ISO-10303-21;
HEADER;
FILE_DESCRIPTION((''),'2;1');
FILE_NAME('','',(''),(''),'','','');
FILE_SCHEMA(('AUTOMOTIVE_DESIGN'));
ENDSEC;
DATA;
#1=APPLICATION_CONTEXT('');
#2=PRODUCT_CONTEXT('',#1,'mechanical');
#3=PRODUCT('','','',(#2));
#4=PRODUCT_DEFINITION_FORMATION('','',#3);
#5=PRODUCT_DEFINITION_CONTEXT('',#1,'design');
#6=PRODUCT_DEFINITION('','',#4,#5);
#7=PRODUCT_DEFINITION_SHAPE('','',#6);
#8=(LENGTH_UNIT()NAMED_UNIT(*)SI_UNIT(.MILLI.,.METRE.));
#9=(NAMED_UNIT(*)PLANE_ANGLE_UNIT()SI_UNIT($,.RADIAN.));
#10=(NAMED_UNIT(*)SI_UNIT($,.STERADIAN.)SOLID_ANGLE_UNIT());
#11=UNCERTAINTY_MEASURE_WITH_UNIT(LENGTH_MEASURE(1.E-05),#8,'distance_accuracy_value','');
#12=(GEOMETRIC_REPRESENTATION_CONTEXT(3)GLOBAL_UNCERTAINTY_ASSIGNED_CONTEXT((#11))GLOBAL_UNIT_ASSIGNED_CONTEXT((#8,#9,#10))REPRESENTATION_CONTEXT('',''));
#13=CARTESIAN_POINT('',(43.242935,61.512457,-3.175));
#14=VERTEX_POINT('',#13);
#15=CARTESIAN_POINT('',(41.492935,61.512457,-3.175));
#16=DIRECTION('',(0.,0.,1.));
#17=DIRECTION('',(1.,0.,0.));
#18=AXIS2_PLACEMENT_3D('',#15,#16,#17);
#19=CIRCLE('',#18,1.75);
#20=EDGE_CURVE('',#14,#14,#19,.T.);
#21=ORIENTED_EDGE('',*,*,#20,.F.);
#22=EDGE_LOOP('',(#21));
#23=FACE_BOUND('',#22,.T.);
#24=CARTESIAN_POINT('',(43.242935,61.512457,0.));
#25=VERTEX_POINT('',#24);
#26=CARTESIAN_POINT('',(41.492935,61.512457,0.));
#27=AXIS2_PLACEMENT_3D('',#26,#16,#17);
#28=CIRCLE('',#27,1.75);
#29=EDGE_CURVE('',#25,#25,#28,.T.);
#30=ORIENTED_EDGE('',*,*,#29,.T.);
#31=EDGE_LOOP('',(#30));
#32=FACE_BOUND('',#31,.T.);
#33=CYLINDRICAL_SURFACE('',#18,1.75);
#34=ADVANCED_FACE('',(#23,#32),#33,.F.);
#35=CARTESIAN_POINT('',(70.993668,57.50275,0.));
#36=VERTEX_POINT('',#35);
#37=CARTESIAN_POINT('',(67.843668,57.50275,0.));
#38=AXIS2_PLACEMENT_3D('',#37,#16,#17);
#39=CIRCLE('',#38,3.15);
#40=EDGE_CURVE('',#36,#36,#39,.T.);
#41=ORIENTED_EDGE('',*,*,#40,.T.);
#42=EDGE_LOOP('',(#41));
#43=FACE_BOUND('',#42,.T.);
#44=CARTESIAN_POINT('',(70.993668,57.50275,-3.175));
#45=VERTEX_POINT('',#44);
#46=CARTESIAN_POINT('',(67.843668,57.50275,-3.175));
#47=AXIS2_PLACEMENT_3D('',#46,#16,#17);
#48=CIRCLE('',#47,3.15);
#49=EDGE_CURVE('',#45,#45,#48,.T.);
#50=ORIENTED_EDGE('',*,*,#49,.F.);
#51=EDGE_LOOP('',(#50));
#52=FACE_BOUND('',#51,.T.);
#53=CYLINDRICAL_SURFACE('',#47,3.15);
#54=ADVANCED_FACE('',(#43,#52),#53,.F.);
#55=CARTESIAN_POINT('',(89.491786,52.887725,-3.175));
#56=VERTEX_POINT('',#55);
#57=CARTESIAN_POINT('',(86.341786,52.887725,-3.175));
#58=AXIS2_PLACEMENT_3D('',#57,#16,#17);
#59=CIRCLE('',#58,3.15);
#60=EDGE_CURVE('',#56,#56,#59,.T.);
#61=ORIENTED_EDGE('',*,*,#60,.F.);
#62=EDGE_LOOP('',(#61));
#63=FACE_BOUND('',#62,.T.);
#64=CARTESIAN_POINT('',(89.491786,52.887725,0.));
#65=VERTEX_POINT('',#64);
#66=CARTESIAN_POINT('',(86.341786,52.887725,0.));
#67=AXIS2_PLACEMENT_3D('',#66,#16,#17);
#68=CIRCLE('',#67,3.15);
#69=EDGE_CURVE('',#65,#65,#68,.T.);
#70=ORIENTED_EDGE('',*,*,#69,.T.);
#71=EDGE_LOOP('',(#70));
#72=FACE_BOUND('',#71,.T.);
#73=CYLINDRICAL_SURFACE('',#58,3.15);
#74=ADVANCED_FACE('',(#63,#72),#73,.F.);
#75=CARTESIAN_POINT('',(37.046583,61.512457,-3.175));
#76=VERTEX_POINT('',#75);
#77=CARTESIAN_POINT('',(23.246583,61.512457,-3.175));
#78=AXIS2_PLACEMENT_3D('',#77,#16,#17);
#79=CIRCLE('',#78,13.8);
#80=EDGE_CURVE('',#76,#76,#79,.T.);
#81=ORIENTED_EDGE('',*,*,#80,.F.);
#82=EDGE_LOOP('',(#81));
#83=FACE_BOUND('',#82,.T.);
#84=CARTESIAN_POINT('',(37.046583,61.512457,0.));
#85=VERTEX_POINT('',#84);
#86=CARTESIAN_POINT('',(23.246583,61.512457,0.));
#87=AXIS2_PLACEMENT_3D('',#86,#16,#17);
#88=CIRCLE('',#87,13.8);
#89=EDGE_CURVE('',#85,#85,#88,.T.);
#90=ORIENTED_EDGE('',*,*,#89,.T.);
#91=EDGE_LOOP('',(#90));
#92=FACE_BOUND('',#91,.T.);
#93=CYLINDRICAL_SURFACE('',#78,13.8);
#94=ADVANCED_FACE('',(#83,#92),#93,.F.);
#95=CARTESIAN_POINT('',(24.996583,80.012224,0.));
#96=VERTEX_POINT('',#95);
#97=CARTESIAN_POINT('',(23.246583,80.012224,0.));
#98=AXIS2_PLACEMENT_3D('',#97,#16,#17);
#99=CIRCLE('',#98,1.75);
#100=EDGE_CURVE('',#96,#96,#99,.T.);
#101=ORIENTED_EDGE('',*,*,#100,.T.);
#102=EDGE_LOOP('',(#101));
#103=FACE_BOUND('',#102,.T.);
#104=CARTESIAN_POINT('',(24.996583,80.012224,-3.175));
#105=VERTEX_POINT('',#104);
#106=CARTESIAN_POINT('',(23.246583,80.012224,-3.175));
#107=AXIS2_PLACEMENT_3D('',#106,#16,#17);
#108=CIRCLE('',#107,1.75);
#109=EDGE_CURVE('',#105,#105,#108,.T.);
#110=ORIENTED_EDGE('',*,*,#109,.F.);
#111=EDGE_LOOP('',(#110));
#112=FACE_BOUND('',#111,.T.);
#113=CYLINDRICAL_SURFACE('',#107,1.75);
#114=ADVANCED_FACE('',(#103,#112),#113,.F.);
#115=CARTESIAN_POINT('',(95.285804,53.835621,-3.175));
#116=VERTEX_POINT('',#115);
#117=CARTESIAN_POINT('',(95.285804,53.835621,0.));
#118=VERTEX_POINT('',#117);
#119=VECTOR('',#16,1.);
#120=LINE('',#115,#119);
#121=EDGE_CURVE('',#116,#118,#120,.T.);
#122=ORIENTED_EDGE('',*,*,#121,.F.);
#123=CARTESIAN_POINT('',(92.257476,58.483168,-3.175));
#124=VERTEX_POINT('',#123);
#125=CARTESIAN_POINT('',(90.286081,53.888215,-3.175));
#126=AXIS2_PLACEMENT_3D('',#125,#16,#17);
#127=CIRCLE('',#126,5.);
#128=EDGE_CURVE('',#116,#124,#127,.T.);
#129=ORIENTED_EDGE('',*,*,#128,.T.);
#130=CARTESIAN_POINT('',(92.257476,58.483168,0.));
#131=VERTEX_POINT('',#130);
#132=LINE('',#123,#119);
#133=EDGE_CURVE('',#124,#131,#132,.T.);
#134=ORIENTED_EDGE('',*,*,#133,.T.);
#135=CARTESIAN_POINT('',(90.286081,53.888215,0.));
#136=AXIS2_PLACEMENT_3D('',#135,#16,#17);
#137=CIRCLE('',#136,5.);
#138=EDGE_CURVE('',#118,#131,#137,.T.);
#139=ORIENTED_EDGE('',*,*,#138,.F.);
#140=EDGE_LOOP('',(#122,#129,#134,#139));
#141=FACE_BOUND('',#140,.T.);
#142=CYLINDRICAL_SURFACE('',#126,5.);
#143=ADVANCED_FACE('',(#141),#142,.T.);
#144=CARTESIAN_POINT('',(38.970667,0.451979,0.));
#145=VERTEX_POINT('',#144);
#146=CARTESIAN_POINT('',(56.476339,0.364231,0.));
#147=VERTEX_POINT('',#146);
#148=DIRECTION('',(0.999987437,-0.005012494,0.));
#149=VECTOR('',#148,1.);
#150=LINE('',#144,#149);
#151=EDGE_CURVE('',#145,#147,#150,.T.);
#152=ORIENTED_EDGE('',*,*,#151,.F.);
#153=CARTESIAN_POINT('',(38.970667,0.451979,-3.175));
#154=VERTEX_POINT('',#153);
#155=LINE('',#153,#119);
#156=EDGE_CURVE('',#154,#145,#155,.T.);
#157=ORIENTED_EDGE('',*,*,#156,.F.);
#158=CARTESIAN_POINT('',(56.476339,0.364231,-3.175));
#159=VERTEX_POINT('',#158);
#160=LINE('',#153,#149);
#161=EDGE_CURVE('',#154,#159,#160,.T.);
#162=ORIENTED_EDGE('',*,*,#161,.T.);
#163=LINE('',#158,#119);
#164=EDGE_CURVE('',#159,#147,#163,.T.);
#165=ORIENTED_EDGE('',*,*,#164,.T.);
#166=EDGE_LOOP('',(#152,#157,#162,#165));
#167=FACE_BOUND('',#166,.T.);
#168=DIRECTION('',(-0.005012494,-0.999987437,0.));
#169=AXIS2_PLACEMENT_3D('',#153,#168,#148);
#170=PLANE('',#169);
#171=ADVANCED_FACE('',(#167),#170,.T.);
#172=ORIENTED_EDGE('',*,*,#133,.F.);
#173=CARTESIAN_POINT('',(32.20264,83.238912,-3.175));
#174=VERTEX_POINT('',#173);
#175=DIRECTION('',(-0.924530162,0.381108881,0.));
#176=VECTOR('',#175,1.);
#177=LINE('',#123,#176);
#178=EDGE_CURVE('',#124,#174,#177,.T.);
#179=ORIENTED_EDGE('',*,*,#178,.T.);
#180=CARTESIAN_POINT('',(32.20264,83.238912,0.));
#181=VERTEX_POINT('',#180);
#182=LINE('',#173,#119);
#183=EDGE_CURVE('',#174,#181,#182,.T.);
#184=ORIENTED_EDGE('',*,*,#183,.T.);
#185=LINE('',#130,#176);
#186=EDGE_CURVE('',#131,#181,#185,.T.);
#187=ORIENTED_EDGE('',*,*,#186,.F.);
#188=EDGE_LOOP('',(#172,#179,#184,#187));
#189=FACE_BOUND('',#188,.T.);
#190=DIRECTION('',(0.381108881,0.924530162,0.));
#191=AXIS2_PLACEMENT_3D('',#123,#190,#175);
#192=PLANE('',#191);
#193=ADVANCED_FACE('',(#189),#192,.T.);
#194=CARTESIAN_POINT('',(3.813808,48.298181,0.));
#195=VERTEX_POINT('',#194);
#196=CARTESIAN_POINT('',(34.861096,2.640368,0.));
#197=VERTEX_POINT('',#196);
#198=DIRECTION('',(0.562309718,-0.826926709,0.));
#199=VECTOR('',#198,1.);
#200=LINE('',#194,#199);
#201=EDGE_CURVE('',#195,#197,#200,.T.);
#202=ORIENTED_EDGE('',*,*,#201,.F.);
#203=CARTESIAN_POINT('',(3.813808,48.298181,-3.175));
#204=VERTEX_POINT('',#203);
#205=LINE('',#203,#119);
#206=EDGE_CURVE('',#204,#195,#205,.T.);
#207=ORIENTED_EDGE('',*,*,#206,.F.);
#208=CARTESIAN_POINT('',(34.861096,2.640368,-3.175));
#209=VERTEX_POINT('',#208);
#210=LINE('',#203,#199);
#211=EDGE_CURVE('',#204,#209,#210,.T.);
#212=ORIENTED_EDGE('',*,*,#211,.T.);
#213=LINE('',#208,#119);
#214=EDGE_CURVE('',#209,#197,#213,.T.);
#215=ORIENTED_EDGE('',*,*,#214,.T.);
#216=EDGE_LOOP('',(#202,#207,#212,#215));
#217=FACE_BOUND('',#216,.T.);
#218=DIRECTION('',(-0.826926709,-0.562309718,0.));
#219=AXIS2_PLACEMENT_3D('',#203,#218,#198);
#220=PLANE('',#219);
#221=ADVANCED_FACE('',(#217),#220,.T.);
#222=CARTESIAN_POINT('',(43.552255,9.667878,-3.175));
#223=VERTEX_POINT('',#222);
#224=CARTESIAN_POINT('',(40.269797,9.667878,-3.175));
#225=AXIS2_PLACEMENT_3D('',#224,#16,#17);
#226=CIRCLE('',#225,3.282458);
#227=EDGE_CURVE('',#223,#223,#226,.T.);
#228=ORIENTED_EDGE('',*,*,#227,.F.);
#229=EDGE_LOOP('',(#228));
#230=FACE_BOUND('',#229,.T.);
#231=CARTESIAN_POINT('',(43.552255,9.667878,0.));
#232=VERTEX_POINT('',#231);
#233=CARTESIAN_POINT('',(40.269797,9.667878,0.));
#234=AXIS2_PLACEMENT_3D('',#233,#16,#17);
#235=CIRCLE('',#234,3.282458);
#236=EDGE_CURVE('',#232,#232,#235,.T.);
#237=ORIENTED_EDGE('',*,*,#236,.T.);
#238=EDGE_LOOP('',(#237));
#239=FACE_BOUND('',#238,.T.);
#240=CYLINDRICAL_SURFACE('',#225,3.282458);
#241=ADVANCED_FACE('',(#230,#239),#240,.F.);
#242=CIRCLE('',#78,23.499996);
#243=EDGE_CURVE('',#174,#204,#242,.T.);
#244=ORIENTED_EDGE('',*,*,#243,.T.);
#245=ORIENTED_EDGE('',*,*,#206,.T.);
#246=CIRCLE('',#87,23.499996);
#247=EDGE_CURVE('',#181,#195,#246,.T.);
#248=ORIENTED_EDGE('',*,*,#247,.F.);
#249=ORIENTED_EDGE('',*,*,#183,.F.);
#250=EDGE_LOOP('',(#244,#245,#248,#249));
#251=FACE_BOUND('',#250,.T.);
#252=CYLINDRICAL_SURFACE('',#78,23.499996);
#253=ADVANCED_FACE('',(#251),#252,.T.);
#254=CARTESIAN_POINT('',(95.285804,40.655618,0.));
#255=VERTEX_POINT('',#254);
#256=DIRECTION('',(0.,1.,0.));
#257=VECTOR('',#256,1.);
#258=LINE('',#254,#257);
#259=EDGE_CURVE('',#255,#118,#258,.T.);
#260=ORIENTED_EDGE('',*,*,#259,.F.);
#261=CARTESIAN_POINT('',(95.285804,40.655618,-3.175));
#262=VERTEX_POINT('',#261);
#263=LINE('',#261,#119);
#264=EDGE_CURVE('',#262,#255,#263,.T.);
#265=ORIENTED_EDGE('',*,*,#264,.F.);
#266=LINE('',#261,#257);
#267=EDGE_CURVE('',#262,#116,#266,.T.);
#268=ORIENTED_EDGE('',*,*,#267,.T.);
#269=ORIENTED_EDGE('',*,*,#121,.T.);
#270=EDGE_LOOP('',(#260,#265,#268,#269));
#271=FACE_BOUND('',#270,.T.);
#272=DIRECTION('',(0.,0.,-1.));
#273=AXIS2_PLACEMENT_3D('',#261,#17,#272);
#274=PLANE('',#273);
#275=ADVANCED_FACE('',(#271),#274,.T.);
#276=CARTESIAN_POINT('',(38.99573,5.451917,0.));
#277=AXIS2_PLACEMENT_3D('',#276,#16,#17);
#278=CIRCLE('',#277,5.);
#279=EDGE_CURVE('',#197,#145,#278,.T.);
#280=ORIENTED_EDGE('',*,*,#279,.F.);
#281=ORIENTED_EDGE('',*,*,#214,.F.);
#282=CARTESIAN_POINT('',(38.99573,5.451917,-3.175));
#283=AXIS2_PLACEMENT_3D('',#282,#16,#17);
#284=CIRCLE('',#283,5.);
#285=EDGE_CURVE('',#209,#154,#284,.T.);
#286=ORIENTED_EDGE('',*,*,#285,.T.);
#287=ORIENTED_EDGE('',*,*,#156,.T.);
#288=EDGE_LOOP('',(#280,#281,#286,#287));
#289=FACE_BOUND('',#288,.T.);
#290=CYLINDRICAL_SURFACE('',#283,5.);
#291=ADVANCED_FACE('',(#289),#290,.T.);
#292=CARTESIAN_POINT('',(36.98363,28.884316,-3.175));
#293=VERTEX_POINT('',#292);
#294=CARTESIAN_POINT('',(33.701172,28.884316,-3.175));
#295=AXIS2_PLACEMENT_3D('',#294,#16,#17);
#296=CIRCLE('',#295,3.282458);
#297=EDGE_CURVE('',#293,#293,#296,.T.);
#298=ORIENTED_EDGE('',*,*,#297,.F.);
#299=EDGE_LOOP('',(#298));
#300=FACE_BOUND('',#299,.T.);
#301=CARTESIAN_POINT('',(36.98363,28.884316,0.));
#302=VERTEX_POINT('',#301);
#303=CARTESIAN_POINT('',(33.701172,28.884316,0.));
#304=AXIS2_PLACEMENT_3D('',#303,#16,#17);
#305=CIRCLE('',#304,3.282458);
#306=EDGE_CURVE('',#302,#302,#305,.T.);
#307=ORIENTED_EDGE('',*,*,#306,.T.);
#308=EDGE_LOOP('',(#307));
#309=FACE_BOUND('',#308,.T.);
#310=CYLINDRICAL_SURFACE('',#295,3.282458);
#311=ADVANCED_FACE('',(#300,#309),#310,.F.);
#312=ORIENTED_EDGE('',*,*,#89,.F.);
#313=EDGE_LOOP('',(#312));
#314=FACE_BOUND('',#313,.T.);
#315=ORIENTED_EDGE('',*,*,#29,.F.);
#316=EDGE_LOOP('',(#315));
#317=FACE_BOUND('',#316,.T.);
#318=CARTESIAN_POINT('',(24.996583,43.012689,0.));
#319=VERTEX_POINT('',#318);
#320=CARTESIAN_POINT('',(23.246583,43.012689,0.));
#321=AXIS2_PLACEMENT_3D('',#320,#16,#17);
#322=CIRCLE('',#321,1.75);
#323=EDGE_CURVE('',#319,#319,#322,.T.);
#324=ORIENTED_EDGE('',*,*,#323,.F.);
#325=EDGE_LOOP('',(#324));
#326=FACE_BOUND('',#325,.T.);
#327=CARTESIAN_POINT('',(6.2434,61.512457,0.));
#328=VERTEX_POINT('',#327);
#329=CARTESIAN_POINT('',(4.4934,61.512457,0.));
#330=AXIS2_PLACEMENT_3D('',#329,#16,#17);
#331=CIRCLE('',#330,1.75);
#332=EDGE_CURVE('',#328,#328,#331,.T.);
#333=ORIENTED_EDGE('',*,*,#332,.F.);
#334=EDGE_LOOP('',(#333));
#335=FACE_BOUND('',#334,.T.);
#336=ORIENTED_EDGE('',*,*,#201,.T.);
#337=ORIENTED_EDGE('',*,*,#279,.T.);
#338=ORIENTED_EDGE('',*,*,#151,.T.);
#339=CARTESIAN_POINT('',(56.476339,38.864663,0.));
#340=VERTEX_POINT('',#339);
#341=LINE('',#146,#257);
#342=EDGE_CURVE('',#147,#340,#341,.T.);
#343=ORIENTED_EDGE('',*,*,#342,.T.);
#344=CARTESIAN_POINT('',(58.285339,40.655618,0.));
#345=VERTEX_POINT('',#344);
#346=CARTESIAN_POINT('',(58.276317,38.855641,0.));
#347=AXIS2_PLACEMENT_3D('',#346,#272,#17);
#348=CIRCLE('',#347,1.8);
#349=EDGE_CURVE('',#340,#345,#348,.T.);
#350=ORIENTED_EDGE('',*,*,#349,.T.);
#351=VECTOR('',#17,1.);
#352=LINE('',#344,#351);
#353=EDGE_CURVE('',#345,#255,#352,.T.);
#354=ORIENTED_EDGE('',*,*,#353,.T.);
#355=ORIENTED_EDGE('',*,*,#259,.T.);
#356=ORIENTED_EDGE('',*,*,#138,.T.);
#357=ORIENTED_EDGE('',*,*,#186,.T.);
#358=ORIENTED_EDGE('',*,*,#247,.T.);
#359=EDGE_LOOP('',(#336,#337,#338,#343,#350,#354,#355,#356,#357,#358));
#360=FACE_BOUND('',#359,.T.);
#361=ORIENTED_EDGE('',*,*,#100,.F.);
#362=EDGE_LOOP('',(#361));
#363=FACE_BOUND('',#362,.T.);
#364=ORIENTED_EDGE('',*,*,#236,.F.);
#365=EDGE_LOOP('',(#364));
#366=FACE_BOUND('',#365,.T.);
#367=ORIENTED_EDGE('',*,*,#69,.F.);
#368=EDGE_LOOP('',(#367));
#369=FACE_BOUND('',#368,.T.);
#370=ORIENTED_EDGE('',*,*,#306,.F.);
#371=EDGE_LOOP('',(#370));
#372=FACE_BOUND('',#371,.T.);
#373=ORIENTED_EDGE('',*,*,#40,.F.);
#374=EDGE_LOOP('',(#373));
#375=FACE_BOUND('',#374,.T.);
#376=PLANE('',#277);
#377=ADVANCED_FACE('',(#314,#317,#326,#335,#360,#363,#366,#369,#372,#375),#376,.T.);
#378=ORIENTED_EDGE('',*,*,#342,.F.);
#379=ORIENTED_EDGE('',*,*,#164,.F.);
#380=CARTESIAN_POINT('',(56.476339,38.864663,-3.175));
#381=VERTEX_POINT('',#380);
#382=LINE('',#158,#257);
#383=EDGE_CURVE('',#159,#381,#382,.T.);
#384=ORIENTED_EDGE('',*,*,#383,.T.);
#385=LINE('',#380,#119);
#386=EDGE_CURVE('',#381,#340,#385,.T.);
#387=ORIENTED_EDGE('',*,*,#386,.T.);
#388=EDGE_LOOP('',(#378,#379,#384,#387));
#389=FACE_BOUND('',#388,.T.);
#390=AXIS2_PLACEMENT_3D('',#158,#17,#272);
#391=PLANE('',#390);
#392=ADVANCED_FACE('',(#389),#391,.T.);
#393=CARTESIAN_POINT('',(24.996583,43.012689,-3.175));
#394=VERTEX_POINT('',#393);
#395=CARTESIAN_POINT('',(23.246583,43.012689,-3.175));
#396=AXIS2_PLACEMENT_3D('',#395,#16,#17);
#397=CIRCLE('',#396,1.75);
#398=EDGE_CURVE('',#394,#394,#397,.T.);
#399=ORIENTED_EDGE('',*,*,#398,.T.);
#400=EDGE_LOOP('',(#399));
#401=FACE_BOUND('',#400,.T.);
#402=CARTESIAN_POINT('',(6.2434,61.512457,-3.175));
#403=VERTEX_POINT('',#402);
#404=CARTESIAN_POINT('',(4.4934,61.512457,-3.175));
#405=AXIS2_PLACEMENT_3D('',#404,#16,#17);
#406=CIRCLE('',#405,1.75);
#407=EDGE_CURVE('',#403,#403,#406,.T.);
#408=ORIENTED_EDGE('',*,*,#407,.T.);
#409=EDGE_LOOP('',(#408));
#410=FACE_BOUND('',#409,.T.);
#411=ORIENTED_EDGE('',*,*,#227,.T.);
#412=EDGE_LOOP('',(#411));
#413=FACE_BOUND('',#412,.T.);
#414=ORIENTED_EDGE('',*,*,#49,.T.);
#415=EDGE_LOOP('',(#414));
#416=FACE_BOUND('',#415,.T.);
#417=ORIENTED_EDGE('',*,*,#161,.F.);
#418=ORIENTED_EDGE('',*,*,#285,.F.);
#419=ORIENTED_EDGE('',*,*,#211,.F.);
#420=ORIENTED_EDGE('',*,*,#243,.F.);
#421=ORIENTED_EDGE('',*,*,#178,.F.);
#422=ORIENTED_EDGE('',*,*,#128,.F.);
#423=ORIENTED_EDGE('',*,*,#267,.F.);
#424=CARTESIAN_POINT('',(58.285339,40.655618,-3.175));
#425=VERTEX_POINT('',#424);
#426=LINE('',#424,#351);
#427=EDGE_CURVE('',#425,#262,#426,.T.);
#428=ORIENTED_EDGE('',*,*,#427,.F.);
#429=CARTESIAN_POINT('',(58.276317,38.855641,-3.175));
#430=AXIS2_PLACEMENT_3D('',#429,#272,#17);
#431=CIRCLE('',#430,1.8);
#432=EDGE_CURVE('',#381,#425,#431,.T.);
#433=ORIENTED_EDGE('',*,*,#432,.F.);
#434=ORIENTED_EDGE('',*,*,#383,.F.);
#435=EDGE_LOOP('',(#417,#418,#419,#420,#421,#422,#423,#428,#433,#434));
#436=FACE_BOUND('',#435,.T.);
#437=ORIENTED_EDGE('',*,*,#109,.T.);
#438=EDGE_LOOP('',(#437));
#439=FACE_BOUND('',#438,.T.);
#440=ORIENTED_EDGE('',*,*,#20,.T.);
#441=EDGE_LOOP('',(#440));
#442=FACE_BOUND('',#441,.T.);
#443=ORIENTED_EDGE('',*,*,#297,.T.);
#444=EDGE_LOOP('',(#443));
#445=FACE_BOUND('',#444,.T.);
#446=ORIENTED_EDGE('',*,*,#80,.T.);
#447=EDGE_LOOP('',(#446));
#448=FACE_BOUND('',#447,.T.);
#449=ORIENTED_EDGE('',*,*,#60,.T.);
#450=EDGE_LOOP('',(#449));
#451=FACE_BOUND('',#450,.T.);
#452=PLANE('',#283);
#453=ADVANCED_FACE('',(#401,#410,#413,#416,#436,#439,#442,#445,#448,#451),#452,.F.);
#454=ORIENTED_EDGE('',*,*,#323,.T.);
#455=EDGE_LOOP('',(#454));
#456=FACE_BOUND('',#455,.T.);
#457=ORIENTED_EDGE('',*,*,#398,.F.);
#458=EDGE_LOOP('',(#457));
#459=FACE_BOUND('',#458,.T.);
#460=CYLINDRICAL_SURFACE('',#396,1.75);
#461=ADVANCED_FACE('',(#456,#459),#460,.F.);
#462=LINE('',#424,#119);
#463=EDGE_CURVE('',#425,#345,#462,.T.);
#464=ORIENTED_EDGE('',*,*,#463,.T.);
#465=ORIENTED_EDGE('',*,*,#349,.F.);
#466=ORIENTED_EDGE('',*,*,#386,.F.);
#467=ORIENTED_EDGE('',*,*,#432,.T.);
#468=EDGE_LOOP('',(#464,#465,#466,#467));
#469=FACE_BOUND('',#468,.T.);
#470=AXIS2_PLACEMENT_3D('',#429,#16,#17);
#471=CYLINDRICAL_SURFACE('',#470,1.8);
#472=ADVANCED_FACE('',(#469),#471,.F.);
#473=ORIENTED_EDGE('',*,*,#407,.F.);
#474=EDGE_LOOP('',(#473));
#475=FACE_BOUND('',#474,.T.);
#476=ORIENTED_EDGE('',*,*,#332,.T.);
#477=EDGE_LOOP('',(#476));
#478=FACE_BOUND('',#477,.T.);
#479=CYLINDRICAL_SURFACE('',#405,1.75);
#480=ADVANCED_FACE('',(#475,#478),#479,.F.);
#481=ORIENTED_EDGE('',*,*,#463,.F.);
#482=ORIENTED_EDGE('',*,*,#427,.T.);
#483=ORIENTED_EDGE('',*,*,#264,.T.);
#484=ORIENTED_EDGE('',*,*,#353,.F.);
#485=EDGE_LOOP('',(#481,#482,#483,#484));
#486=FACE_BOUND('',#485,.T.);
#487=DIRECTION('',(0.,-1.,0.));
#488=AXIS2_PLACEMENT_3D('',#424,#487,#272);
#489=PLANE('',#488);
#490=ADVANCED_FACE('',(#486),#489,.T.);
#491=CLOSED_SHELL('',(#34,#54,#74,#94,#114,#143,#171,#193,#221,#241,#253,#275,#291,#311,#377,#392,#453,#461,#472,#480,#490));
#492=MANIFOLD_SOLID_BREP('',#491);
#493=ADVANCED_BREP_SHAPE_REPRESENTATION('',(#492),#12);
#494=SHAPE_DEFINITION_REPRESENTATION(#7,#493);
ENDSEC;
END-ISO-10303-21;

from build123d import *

# Parameters (mm, degrees)
SKETCH1_R          = 1.75
SKETCH1_R_2        = 13.8
BASE_FLANGE1_DEPTH = 3.175
SKETCH6_R          = 3.15
SKETCH6_R_2        = 3.282457618
CUT_EXTRUDE1_DEPTH = 128.736584442


# Sheet-metal steps are written as plain solids
with BuildPart() as part:
    # Sketch1 → Base-Flange1 (new body)
    with BuildSketch(Plane.XY):
        with BuildLine():
            Line((38.970667364, 0.451979476), (56.476339415, 0.364231306))
            Line((56.476339415, 0.364231306), (56.476339415, 38.864663006))
            ThreePointArc((56.476339415, 38.864663006), (57.009920449, 40.134796597), (58.285339291, 40.655617905))
            Line((58.285339291, 40.655617905), (95.285804475, 40.655617905))
            Line((95.285804475, 40.655617905), (95.285804475, 53.835620703))
            ThreePointArc((95.285804475, 53.835620703), (94.475239571, 56.617857644), (92.257476371, 58.483168407))
            Line((92.257476371, 58.483168407), (32.202639785, 83.238911906))
            ThreePointArc((32.202639785, 83.238911906), (5.007775741, 76.331219775), (3.813808252, 48.29818065))
            Line((3.813808252, 48.29818065), (34.861096289, 2.640368074))
            ThreePointArc((34.861096289, 2.640368074), (36.645617305, 1.038644509), (38.970667364, 0.451979476))
        make_face()
        with Locations((23.246582606, 43.012689186)):
            Circle(SKETCH1_R, mode=Mode.SUBTRACT)
        with Locations((4.493399578, 61.512456777)):
            Circle(SKETCH1_R, mode=Mode.SUBTRACT)
        with Locations((23.246582606, 80.012224369)):
            Circle(SKETCH1_R, mode=Mode.SUBTRACT)
        with Locations((41.492934761, 61.512456777)):
            Circle(SKETCH1_R, mode=Mode.SUBTRACT)
        with Locations((23.246582606, 61.512456777)):
            Circle(SKETCH1_R_2, mode=Mode.SUBTRACT)
    extrude(amount=-BASE_FLANGE1_DEPTH)

    # Sketch6 → Cut-Extrude1 (cut, through all)
    with BuildSketch(Plane.XY):
        with Locations((86.341786245, 52.887725453)):
            Circle(SKETCH6_R)
        with Locations((40.269797133, 9.667877899)):
            Circle(SKETCH6_R_2)
        with Locations((33.701172349, 28.884316382)):
            Circle(SKETCH6_R_2)
        with Locations((67.843667948, 57.502749994)):
            Circle(SKETCH6_R)
    extrude(amount=-CUT_EXTRUDE1_DEPTH, mode=Mode.SUBTRACT)


solid = part.part
